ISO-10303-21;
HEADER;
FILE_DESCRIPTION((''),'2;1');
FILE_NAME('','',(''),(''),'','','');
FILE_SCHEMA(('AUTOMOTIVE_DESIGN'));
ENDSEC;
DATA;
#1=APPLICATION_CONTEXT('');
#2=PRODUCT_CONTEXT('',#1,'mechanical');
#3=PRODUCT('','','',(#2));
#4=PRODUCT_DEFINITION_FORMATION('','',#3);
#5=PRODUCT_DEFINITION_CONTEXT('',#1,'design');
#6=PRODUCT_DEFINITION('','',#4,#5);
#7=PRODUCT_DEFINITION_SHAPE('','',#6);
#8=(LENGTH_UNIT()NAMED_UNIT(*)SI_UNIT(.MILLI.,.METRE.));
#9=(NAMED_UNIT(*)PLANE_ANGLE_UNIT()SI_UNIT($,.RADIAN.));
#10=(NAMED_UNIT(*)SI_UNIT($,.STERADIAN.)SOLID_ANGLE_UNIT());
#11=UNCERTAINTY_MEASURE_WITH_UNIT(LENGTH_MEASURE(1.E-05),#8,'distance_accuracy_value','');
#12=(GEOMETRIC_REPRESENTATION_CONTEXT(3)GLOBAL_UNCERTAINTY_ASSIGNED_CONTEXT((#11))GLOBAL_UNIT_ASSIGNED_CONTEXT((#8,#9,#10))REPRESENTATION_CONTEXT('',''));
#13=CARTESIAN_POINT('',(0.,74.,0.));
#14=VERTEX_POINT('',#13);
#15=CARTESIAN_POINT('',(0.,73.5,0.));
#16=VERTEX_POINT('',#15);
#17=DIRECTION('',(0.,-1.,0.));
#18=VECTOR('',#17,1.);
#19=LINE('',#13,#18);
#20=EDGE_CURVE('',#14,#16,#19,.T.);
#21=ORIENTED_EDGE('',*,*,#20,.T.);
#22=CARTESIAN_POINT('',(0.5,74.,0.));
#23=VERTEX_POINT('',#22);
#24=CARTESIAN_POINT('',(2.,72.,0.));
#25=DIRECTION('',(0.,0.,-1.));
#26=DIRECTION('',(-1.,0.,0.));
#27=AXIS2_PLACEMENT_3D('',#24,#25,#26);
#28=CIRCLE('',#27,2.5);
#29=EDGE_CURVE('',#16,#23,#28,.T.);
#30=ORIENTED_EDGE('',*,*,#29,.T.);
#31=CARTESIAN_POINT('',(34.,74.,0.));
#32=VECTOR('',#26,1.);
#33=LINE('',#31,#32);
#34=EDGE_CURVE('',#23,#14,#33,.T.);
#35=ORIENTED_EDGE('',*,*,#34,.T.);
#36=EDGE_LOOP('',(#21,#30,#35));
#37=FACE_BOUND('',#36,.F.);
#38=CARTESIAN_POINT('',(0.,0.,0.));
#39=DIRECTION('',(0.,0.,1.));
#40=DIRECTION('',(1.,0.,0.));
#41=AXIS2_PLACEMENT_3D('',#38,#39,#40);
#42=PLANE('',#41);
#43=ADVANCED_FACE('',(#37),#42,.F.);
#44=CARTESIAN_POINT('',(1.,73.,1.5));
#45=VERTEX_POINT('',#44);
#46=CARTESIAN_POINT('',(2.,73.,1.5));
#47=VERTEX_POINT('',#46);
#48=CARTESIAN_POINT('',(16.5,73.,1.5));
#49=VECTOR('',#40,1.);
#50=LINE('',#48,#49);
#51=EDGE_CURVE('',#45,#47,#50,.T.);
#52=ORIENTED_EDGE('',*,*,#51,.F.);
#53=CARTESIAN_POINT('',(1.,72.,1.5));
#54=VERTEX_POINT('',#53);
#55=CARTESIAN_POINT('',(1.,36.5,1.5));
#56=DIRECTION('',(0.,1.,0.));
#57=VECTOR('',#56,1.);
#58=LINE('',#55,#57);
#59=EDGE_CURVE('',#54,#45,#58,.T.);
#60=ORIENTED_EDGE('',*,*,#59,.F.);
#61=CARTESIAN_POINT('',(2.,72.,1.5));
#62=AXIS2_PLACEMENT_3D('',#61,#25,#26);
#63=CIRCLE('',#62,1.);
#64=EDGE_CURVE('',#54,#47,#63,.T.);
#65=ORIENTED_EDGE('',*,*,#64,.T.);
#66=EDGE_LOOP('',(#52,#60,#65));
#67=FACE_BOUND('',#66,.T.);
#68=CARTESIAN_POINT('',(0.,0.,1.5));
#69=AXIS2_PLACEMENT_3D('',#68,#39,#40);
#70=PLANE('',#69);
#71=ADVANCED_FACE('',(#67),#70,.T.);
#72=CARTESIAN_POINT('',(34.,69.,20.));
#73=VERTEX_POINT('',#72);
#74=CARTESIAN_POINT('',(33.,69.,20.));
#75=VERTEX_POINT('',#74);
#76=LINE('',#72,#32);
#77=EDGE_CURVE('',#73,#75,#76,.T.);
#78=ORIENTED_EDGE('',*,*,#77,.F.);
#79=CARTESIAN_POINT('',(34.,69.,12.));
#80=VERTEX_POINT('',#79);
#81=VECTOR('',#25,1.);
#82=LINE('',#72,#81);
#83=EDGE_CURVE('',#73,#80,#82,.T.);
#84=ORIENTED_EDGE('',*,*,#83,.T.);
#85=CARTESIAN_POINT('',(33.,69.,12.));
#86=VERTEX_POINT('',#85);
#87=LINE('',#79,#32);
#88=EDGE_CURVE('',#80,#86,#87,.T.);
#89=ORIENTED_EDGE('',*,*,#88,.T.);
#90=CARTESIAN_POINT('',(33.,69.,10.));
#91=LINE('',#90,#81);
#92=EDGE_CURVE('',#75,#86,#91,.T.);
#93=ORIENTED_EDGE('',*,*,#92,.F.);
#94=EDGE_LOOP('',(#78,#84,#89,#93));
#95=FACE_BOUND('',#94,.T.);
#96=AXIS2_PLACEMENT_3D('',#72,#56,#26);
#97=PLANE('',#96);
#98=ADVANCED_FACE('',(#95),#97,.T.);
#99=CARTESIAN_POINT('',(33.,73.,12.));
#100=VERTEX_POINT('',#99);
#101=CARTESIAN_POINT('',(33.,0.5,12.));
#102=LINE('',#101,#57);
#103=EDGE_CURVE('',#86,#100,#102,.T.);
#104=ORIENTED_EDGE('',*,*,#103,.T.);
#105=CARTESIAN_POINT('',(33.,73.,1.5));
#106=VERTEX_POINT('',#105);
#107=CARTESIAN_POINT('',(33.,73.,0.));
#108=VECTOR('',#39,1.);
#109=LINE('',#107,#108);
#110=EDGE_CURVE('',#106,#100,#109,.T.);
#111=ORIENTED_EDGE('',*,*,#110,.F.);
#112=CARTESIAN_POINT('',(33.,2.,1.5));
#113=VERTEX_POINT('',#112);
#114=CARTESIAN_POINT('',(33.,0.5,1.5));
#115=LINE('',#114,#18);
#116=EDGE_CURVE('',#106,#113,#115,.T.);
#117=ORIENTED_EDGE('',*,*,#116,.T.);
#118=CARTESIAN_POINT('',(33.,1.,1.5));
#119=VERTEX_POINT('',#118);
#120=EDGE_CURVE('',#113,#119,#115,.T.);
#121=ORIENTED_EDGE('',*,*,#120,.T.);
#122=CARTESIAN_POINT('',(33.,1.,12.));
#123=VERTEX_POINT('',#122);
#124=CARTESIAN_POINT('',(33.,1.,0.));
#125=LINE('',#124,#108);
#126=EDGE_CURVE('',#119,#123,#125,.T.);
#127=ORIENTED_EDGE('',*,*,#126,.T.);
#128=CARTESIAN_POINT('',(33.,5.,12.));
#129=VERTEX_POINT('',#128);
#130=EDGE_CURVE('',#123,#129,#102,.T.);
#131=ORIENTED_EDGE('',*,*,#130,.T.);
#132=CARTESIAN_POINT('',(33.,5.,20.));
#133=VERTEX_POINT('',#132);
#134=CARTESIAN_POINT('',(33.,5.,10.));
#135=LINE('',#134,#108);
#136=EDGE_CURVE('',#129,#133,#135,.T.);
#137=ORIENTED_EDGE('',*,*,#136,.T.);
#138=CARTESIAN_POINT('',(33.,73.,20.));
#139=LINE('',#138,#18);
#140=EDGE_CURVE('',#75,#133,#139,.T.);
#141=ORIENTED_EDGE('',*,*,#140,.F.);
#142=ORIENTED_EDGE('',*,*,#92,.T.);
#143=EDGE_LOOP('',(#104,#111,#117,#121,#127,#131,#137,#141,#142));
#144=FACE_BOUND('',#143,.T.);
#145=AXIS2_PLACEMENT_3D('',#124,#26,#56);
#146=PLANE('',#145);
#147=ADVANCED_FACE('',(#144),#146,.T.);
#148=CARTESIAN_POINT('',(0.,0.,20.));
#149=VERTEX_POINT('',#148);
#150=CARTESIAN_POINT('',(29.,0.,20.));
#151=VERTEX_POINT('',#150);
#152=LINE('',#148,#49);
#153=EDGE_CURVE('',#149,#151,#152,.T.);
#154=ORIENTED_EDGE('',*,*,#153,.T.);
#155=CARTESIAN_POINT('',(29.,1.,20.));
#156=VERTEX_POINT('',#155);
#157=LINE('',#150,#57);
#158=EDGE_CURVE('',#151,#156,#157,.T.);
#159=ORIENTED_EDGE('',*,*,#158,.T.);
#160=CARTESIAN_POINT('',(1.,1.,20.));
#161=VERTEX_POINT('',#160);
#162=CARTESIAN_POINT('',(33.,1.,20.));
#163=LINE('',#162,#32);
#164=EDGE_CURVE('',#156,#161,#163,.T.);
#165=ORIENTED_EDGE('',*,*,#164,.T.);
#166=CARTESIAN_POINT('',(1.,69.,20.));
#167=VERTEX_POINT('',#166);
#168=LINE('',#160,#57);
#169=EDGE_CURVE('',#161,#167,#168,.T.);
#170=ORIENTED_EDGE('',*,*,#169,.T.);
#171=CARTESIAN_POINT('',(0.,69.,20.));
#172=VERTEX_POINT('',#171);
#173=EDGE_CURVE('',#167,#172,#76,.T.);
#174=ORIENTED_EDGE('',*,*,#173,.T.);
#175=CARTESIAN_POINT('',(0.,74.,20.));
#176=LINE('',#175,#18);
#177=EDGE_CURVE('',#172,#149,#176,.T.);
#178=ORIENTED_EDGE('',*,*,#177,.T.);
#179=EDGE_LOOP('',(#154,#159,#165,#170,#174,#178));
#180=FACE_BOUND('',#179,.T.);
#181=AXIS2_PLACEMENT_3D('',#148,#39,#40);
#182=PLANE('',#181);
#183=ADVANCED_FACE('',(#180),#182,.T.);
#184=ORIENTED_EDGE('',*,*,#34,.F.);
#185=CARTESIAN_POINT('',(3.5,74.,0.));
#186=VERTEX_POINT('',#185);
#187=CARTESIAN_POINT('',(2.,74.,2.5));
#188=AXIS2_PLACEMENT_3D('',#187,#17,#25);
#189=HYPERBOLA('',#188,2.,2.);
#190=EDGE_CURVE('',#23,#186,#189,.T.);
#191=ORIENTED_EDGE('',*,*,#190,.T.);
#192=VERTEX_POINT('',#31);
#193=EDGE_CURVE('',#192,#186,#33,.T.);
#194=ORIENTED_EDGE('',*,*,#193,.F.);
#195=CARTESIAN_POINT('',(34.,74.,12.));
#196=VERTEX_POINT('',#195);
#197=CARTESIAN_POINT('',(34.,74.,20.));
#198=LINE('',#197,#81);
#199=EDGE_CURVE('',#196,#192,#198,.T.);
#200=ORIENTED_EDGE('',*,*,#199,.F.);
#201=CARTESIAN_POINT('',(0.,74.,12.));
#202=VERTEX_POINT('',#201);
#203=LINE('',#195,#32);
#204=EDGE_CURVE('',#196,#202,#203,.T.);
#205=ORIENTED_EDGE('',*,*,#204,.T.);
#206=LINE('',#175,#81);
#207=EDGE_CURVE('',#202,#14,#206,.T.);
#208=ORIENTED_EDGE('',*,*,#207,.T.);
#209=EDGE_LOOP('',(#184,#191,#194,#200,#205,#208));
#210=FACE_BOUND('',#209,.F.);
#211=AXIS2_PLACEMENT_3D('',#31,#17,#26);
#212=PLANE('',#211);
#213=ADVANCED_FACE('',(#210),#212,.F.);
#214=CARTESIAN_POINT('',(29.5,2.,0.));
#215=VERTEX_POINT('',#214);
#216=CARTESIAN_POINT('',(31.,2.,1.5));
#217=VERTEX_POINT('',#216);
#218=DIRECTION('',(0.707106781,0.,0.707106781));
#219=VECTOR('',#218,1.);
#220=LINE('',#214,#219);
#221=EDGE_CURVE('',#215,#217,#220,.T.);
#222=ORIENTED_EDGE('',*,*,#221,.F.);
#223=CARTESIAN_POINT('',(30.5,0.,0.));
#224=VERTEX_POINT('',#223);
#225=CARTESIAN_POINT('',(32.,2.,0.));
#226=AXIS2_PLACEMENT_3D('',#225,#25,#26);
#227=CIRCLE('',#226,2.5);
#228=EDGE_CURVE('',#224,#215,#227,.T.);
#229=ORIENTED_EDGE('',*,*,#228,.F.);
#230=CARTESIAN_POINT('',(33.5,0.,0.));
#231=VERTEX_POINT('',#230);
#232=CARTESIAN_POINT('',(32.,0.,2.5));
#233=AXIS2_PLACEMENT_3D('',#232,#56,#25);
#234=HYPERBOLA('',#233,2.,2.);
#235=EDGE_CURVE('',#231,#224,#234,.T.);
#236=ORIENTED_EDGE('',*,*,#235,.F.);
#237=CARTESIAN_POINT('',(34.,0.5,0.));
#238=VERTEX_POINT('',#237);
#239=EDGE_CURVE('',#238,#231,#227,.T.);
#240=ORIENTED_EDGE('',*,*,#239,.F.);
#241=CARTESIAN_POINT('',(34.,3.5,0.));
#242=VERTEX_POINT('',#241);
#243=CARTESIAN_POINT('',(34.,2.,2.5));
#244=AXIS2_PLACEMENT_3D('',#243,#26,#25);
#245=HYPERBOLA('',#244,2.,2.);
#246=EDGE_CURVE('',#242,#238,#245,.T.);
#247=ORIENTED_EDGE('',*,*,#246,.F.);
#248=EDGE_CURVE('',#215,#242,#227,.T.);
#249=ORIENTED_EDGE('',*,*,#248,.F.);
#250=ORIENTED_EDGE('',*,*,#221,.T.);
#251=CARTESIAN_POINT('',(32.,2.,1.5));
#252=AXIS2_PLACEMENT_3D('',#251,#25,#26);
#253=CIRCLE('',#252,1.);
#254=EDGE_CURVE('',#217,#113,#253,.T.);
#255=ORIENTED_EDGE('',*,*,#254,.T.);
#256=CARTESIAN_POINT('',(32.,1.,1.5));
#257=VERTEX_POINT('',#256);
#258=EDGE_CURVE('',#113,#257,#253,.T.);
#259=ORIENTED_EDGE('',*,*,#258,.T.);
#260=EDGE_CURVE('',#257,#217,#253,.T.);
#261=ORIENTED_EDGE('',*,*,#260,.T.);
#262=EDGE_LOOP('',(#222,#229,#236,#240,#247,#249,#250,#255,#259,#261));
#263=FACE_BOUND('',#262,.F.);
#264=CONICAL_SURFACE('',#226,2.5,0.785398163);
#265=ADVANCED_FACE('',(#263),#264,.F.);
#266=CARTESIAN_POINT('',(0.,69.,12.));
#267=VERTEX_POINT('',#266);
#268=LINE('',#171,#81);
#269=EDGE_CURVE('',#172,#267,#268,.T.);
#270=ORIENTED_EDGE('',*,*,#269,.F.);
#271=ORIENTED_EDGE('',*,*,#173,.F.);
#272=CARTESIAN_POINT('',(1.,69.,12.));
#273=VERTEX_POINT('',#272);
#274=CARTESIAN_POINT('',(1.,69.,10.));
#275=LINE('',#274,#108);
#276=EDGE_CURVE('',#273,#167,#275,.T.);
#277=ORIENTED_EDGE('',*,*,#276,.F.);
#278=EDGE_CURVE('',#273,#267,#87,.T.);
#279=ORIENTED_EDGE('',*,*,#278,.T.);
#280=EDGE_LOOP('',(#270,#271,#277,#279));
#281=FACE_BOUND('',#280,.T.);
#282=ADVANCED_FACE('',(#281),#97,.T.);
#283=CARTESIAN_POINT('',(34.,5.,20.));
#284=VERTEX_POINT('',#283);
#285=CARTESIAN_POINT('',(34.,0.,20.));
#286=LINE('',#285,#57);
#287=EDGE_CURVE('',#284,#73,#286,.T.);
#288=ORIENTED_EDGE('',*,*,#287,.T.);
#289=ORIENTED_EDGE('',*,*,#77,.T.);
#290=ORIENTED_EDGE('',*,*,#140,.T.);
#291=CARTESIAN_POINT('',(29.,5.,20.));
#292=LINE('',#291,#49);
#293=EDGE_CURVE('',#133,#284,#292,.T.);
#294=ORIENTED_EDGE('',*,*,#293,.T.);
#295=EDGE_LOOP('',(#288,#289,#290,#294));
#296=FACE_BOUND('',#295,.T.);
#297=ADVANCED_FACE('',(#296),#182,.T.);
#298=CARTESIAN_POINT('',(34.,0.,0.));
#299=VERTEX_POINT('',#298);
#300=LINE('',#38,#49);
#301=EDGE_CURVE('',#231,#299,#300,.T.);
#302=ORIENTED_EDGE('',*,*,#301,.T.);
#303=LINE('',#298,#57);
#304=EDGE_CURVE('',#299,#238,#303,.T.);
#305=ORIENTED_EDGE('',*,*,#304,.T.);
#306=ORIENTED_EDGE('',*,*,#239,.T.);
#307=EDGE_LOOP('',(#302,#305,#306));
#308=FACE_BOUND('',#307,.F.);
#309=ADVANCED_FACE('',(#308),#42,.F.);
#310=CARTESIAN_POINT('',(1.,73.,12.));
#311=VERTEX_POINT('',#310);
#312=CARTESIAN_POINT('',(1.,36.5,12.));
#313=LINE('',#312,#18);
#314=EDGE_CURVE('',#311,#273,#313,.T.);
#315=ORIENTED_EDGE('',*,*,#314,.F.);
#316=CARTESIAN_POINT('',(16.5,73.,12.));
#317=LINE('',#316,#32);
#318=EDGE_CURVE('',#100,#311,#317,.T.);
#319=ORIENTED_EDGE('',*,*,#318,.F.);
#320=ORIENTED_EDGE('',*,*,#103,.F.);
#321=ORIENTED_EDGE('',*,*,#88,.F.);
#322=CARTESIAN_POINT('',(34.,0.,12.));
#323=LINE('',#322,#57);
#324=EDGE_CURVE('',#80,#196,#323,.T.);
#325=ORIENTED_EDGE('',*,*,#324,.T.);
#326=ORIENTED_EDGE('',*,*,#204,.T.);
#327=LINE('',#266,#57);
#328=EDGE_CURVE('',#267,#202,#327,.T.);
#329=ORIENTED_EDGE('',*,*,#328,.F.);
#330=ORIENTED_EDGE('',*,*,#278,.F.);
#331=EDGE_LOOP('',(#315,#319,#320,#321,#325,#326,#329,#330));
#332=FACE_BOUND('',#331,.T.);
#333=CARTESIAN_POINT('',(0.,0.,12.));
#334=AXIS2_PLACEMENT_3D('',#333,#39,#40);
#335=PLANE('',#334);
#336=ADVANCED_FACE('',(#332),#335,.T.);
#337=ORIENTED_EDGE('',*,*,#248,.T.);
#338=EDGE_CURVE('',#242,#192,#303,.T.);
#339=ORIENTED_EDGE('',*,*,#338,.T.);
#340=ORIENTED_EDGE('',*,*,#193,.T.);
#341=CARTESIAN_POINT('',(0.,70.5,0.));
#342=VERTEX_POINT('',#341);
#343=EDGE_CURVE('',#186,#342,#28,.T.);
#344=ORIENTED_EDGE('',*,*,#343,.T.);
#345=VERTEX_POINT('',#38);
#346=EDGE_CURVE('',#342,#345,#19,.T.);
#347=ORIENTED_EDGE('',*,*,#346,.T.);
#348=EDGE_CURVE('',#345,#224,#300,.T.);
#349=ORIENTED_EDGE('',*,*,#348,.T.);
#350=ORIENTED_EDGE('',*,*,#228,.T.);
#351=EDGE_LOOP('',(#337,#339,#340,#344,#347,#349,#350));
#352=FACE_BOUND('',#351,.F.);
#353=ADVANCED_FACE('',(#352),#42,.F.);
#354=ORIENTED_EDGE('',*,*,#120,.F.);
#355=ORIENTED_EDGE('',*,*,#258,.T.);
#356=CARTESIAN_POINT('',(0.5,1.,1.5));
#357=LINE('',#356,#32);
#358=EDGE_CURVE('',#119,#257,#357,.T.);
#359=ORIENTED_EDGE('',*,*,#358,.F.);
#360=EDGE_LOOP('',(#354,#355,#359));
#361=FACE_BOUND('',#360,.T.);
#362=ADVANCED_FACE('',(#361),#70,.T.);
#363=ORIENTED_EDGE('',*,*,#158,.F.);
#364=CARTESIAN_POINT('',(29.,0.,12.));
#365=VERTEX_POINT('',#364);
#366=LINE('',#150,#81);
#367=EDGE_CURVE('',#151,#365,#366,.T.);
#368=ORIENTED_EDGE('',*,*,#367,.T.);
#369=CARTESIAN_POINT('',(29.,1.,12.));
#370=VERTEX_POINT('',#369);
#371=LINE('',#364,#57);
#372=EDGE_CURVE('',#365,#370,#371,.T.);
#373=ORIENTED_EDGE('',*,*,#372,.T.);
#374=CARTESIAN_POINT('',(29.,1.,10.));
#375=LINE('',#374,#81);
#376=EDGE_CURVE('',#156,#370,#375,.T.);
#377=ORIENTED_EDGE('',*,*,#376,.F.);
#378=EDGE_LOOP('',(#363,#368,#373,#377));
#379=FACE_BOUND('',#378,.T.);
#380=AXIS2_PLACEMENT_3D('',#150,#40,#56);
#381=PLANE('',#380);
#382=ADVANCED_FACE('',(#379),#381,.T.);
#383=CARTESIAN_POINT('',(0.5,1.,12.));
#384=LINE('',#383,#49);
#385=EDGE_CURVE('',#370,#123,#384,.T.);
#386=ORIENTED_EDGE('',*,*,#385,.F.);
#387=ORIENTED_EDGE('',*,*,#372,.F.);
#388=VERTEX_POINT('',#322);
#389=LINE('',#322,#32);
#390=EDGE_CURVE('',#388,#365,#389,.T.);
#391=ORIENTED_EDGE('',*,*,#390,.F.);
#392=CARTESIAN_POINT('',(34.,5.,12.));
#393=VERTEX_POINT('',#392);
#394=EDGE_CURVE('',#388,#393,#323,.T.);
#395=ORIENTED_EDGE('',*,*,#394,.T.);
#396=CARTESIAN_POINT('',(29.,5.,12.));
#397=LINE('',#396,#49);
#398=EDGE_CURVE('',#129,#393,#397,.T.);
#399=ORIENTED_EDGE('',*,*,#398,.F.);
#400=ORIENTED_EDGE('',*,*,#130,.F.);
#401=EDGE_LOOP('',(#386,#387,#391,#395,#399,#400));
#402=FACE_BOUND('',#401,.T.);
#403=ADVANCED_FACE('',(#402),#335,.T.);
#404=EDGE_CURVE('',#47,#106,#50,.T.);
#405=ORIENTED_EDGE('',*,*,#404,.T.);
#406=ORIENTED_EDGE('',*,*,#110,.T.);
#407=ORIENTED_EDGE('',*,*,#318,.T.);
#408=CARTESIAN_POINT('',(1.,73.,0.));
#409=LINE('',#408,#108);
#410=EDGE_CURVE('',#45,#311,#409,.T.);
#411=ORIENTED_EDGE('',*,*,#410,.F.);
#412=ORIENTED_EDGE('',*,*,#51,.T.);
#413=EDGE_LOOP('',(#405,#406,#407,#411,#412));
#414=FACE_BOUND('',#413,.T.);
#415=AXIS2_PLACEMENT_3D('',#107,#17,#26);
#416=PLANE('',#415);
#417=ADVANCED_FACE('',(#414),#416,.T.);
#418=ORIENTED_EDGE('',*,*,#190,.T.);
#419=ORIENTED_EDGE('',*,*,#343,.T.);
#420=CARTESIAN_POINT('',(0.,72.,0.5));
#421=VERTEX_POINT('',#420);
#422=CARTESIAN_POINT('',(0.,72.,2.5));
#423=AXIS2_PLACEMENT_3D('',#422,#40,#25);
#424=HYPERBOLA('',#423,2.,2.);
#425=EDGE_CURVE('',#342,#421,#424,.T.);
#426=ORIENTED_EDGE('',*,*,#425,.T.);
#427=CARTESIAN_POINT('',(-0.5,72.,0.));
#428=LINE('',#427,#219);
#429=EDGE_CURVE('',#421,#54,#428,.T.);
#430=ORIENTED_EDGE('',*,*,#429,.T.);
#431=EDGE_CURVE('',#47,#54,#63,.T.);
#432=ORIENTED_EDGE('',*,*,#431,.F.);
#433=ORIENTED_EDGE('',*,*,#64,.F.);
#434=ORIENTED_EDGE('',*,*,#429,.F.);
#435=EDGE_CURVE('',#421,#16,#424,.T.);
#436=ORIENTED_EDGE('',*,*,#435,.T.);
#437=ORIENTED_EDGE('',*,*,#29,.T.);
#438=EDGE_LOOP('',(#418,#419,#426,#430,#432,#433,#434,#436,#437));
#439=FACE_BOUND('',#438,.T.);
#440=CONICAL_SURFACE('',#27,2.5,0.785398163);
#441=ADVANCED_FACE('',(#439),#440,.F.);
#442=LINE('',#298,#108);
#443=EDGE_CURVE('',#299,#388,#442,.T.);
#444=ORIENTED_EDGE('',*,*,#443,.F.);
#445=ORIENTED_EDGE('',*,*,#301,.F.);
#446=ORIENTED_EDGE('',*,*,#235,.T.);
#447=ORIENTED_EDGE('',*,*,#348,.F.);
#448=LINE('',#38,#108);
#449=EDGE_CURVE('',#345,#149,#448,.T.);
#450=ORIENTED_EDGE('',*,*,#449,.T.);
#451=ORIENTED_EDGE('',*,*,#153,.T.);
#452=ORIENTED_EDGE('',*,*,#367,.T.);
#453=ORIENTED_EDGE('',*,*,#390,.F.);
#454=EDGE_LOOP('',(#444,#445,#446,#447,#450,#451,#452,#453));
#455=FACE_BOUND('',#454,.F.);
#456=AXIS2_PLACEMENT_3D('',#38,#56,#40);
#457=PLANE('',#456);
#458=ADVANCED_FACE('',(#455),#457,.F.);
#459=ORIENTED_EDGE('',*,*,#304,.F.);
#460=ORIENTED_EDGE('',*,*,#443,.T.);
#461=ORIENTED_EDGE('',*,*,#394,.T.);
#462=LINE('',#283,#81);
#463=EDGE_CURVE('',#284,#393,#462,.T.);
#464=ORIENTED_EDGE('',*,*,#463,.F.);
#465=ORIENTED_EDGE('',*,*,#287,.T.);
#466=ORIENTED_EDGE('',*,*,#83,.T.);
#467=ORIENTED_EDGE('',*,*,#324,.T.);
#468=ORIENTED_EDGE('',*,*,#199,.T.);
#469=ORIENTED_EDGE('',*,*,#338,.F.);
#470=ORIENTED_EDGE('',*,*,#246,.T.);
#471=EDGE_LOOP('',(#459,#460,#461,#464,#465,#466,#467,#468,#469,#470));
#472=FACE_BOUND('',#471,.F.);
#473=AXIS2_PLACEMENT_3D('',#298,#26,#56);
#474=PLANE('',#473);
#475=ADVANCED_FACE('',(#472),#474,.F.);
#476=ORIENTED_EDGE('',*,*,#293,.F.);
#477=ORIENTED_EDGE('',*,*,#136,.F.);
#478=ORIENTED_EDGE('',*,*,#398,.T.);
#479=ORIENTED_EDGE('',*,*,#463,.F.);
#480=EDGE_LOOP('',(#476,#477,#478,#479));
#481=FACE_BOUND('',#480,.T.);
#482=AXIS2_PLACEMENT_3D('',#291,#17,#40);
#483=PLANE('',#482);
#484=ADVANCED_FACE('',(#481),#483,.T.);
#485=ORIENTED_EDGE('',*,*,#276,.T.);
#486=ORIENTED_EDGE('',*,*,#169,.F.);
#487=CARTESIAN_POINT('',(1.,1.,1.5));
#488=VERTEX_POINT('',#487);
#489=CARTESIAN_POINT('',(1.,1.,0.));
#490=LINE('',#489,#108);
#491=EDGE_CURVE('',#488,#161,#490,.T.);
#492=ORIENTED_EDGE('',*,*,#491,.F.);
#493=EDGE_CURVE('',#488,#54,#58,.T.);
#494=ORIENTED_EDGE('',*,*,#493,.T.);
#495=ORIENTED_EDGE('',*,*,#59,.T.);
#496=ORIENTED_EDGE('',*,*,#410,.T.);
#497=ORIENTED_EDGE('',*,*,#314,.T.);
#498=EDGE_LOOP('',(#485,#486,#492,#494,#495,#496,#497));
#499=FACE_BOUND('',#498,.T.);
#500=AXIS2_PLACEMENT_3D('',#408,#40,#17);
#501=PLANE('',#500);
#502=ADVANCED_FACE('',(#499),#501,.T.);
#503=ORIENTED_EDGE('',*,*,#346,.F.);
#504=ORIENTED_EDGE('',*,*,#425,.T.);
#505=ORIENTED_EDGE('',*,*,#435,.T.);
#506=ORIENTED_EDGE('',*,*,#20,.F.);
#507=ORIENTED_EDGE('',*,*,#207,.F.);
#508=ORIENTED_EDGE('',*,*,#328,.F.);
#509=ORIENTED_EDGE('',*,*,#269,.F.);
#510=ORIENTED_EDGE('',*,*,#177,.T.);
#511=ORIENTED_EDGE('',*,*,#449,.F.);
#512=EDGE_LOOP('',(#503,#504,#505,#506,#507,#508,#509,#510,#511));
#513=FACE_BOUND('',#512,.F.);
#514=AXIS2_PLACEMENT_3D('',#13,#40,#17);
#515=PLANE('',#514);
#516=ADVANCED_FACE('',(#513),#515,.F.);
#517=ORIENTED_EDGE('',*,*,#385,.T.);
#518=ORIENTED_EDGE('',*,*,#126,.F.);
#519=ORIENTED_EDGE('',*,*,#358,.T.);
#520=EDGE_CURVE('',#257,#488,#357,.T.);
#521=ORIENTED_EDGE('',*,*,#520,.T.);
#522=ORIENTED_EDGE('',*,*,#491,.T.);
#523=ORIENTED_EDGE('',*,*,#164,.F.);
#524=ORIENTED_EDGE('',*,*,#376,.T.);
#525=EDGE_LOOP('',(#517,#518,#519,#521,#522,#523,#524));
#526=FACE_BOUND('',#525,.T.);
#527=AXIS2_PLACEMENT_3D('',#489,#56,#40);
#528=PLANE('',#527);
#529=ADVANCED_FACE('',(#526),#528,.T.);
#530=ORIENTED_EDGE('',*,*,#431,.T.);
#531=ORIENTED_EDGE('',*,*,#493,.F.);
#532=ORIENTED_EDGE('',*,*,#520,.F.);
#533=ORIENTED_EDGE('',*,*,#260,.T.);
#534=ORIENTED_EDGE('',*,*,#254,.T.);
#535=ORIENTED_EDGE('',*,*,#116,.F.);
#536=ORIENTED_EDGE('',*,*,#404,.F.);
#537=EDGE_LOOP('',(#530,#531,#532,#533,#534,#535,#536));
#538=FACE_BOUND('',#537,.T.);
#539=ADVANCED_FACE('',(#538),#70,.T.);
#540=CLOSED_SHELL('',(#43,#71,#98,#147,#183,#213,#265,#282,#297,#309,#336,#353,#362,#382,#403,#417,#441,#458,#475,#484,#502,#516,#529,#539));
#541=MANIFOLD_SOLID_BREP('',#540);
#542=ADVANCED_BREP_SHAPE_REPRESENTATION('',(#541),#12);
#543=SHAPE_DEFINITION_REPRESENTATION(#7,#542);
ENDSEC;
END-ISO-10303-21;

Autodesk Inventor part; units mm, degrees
ref_plane "YZ Plane" through (0, 0, 0) normal (1, 0, 0) x (0, 1, 0)
ref_plane "XZ Plane" through (0, 0, 0) normal (0, 1, 0) x (-1, 0, 0)
ref_plane "XY Plane" through (0, 0, 0) normal (0, 0, 1) x (1, 0, 0)
sketch "Sketch1" plane through (0, 0, 0) normal (0, 0, 1) x (1, 0, 0)
  line L0 (0, 0) -> (34, 0)
  line L1 (34, 0) -> (34, 74)
  line L2 (34, 74) -> (0, 74)
  line L3 (0, 74) -> (0, 0)
  line L4 (33, 73) -> (1, 73)
  line L5 (1, 73) -> (1, 1)
  line L6 (1, 1) -> (33, 1)
  line L7 (33, 1) -> (33, 73)
  dimension "d0" = 34
  dimension "d1" = 74
  dimension "d2" = 1
  dimension "d3" = 1
  dimension "d4" = 1
  dimension "d5" = 1
extrude "Extrusion1" add sketch "Sketch1" along normal blind 1.5 contours L3 L2 L1 L0 | L7 L6 L5 L4
extrude "Extrusion2" add sketch "Sketch1" along normal blind 20
sketch "Sketch2" plane through (0, 0, 0) normal (0, 0, -1) x (-1, 0, 0)
  circle A0 centre (-32, 2) radius 1
  circle A1 centre (-2, 72) radius 1
  line L0 (0, 74) -> (0, 0) projected
  line L1 (-34, 74) -> (0, 74) projected
  line L2 (0, 0) -> (-34, 0) projected
  line L3 (-34, 0) -> (-34, 74) projected
  dimension "d10" = 2
  dimension "d11" = 2
  dimension "d12" = 2
  dimension "d13" = 2
  dimension "d14" = 2
  dimension "d15" = 2
extrude "Extrusion3" cut sketch "Sketch2" against normal through all contours A0 | A1
sketch "Sketch3" plane through (0, 0, 20) normal (0, 0, 1) x (1, 0, 0)
  line L0 (34, 74) -> (0, 74) projected
  line L1 (34, 0) -> (34, 74) projected
  line L2 (0, 74) -> (34, 74)
  line L3 (34, 74) -> (34, 69)
  line L4 (34, 69) -> (0, 69)
  line L5 (0, 69) -> (0, 74)
  line L6 (34, 0) -> (29, 0)
  line L7 (29, 0) -> (29, 5)
  line L8 (29, 5) -> (34, 5)
  line L9 (34, 5) -> (34, 0)
  point P0 (0, 0)
  dimension "d20" = 5
  dimension "d21" = 5
  dimension "d22" = 5
extrude "Extrusion4" cut sketch "Sketch3" against normal blind 8
chamfer "Chamfer1" distance 1.5 angle 45 2 edges at (3, 72, 0) (33, 2, 0)
properties part number "brainholder"
